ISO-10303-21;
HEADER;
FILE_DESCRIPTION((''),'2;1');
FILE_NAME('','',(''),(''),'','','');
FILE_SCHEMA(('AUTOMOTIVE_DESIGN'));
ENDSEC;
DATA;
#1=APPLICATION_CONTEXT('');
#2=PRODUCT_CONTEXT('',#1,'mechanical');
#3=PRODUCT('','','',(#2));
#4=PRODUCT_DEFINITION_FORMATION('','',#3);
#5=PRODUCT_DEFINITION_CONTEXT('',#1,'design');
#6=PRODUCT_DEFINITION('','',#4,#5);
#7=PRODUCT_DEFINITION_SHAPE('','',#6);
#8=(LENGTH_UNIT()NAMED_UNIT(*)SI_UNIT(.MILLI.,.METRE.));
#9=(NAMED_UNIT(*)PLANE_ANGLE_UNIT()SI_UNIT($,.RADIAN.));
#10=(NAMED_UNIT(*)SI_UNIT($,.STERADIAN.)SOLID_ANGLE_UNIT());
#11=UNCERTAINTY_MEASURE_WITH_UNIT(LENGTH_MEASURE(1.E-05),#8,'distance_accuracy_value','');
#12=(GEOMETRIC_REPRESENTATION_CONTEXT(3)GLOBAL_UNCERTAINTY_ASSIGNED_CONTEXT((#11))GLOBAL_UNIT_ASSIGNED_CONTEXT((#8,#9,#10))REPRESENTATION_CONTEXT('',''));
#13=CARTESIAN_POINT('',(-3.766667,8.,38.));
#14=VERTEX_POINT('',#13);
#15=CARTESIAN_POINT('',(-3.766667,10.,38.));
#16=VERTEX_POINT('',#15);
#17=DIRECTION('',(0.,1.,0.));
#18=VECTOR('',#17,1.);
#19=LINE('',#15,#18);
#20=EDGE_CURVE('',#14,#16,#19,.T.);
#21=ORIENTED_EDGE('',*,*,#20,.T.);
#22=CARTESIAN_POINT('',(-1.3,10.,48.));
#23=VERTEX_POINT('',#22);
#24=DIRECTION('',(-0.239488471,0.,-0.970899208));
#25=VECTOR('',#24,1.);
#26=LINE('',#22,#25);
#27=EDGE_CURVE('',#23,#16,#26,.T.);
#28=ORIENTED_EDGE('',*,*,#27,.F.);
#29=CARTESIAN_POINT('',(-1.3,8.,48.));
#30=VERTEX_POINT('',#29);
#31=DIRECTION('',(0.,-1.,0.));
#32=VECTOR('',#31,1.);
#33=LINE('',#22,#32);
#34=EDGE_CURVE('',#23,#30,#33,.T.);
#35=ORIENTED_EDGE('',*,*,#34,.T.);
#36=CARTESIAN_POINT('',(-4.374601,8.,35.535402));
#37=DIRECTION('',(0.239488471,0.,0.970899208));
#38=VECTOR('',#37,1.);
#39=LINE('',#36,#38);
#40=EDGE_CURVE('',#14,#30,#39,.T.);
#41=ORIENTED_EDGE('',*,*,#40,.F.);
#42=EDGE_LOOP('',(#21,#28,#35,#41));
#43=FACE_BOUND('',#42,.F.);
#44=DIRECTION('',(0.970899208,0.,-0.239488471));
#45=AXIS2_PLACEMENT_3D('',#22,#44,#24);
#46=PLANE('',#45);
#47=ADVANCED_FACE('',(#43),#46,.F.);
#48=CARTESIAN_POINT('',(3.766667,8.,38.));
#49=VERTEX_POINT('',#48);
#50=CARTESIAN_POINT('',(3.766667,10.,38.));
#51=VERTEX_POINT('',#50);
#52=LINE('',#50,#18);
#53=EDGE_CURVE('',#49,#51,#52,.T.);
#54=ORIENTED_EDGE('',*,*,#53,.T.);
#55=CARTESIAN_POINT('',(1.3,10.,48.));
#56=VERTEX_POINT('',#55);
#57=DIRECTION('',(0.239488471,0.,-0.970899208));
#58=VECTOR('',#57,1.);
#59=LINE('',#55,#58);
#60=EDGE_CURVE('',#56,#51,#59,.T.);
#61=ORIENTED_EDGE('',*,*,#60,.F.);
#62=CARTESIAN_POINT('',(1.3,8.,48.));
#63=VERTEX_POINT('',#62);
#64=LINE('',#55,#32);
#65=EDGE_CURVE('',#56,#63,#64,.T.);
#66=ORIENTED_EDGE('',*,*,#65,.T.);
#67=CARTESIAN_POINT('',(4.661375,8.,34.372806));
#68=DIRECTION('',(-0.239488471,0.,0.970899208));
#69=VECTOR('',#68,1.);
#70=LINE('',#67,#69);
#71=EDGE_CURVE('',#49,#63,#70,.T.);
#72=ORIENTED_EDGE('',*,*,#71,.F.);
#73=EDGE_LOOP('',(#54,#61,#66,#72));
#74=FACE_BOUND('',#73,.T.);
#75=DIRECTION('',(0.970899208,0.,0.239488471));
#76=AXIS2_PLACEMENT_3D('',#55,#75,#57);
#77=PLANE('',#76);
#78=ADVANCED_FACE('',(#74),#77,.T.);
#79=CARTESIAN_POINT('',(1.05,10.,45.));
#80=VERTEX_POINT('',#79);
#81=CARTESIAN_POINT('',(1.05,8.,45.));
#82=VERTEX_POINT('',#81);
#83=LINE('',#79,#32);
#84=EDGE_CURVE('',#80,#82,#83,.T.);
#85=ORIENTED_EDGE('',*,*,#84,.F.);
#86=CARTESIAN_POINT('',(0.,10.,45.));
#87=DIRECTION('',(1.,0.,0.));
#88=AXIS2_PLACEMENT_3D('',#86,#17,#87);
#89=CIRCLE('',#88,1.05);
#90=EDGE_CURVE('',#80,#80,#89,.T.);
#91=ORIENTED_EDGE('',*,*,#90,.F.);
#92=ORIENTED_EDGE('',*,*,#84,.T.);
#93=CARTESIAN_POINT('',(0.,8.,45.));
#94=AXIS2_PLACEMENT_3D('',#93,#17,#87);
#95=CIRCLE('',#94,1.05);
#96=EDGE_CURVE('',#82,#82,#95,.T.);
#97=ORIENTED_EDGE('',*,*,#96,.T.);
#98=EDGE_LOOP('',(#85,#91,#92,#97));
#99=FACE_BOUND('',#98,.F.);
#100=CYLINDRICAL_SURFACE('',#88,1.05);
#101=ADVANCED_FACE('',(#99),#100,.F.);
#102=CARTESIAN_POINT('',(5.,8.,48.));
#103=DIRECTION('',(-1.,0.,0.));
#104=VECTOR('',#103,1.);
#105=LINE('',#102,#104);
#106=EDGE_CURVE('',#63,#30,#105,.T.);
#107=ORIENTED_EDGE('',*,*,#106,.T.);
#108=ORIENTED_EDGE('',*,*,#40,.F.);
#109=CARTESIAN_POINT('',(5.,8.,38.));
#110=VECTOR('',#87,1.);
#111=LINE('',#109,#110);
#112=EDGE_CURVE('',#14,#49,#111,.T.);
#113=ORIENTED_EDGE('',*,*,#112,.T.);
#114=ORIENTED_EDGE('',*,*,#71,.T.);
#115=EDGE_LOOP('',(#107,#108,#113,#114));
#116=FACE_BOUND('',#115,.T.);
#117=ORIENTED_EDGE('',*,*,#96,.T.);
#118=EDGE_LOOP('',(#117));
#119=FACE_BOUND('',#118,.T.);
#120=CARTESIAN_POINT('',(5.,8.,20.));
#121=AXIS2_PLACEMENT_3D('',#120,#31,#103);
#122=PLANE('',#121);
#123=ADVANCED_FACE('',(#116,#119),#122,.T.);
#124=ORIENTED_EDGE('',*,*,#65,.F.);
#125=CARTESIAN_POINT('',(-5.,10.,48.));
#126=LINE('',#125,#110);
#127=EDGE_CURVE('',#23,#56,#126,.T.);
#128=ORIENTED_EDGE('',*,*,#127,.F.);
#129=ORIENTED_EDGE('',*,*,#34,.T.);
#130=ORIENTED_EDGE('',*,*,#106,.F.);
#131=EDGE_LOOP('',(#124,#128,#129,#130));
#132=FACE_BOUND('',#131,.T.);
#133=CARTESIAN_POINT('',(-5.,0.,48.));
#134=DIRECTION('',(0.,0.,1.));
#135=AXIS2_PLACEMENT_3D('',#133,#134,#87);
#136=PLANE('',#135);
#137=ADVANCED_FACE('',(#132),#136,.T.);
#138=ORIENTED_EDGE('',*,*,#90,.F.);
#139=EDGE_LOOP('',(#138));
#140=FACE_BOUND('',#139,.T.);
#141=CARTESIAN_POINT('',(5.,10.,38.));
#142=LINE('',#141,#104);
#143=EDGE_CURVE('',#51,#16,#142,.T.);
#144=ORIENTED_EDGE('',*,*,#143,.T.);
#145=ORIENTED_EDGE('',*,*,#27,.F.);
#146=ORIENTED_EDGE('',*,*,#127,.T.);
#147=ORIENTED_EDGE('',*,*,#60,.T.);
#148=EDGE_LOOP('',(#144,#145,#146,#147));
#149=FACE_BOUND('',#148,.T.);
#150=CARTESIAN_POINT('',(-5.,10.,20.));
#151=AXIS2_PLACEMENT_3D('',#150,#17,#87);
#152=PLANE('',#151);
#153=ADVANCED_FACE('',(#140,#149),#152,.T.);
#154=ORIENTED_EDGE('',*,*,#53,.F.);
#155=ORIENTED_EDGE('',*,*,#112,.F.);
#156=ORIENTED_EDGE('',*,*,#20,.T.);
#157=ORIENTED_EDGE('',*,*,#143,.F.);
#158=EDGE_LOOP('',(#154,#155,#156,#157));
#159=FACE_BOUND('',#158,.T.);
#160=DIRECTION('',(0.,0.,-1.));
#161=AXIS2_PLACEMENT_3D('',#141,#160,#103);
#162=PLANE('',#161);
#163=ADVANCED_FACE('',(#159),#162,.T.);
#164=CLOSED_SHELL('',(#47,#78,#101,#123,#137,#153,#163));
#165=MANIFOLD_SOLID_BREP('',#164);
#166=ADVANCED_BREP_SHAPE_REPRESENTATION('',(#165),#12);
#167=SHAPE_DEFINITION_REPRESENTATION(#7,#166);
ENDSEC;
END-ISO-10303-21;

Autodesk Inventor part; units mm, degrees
ref_plane "YZ Plane" through (0, 0, 0) normal (1, 0, 0) x (0, 1, 0)
ref_plane "XZ Plane" through (0, 0, 0) normal (0, 1, 0) x (-1, 0, 0)
ref_plane "XY Plane" through (0, 0, 0) normal (0, 0, 1) x (1, 0, 0)
sketch "Sketch1" plane through (0, 0, 0) normal (0, 1, 0) x (-1, 0, 0)
  circle A0 centre (0, 0) radius 1.05
  line L0 (5, 20) -> (-5, 20)
  line L1 (-5, 20) -> (-5, -5)
  line L2 (-5, -5) -> (5, -5)
  line L3 (5, -5) -> (5, 20)
  circle A1 centre (0, 15) radius 1.05
  dimension "d0" = 2.1
  dimension "d1" = 5
  dimension "d2" = 10
  dimension "d4" = 5
  dimension "d16" = 2.1
  dimension "d17" = 15
  dimension "d18" = 5
extrude "Extrusion1" add sketch "Sketch1" along normal blind 10
sketch "Sketch2" plane through (5, 0, 20) normal (1, 0, 0) x (0, 0, -1)
  line L0 (0, 10) -> (25, 10) projected
  line L1 (15, 10) -> (17.5478, 3)
  line L2 (17.5478, 3) -> (25, 3)
  line L3 (18.95, 10) -> (18.95, 0) projected
  line L4 (25, 3) -> (25, 10)
  line L5 (25, 10) -> (15, 10)
  line L6 (25, 0) -> (25, 10) projected
  line L7 (0, 0) -> (25, 0) projected
  point P0 (20, 0)
  dimension "d8" = 3
  dimension "d9" = 110
  dimension "d10" = 10
extrude "Extrusion2" cut sketch "Sketch2" against normal blind 10 contours L0 L3 L2 L1 | L0 L4 L2 L3
sketch "Sketch3" plane through (0, 10, 0) normal (0, 1, 0) x (1, 0, 0)
  circle A0 centre (0, 0) radius 2
  dimension "d13" = 4
extrude "Extrusion3" cut sketch "Sketch3" against normal up to surface (7 mm away)
sketch "Sketch4" plane through (0, 10, 0) normal (0, 1, 0) x (1, 0, 0)
  circle A0 centre (0, -15) radius 1.05 projected
  circle A1 centre (0, -15) radius 2.25
  point P0 (0, 0)
  dimension "d19" = 4.5
extrude "Extrusion4" cut sketch "Sketch4" against normal up to surface (7 mm away)
chamfer "Chamfer1" distance 1 angle 45 1 edges at (1.05, 3, 0)
sketch "Sketch5" plane through (5, 0, -5) normal (0, 0, -1) x (-1, 0, 0)
  line L0 (5, 0) -> (5, 5.666) construction
  circle A0 centre (5, 5.666) radius 2.1
  line L1 (10, 3) -> (0, 3) projected
  dimension "d25" = 4.2
  dimension "d26" = 2.666
extrude "Extrusion5" cut sketch "Sketch5" against normal blind 31.5
sketch "Sketch6" plane through (0, 10, 0) normal (0, 1, 0) x (1, 0, 0)
  line L0 (5, -5) -> (-5, -5) projected
  line L1 (0, -5) -> (0, -20) construction
  line L2 (-5, -20) -> (5, -20) projected
  line L3 (3.45, -10.575) -> (-3.45, -10.575)
  line L4 (-3.45, -10.575) -> (-3.45, -7.425)
  line L5 (-3.45, -7.425) -> (3.45, -7.425)
  line L6 (3.45, -7.425) -> (3.45, -10.575)
  line L7 (3.45, -10.575) -> (-3.45, -7.425) construction
  line L8 (-3.45, -10.575) -> (3.45, -7.425) construction
  point P0 (0, 0)
  point P1 (0, -9)
  dimension "d29" = 6.9
  dimension "d30" = 3.15
  dimension "d31" = 4
extrude "Extrusion6" cut sketch "Sketch6" against normal blind 5
sketch "Sketch7" plane through (-3.45, 10, 7.425) normal (0, 0, 1) x (1, 0, 0)
  arc A0 (5.4416, -5) -> (1.4584, -5) centre (3.45, -4.334) ccw projected
  line L0 (3.45, -8.3177) -> (0, -6.3259)
  line L1 (0, -6.3259) -> (0, -2.3421)
  line L2 (0, -2.3421) -> (3.45, -0.3503)
  line L3 (3.45, -0.3503) -> (6.9, -2.3421)
  line L4 (6.9, -2.3421) -> (6.9, -6.3259)
  line L5 (6.9, -6.3259) -> (3.45, -8.3177)
  point P0 (3.45, -10)
  dimension "d34" = 6.9
extrude "Extrusion7" cut sketch "Sketch7" along normal blind 3.15
sketch "Sketch8" plane through (-5, 0, 20) normal (0, 0, 1) x (1, 0, 0)
  line L0 (0, 10) -> (10, 10)
  line L1 (10, 10) -> (10, 8)
  line L2 (10, 8) -> (0, 8)
  line L3 (0, 8) -> (0, 10)
  line L4 (0, 10) -> (10, 10) projected
  line L5 (10, 0) -> (10, 10) projected
  line L6 (0, 0) -> (0, 10) projected
  point P0 (5, 0)
  dimension "d37" = 2
extrude "Extrusion8" add sketch "Sketch8" along normal blind 28
chamfer "Chamfer2" distance 4 angle 45 1 edges at (0, 8, 20)
sketch "Sketch9" plane through (0, 10, 0) normal (0, 1, 0) x (1, 0, 0)
  circle A0 centre (0, -45) radius 1.05
  line L0 (5, -48) -> (-5, -48) projected
  point P0 (0, 0)
  dimension "d46" = 2.1
  dimension "d50" = 3
extrude "Extrusion9" cut sketch "Sketch9" against normal blind 15
sketch "Sketch10" plane through (0, 10, 0) normal (0, 1, 0) x (1, 0, 0)
  line L0 (5, -48) -> (-5, -48) projected
  line L1 (-1.3, -48) -> (-5, -33)
  line L2 (-5, -5) -> (-5, -48) projected
  line L3 (-5, -33) -> (-5, -48)
  line L4 (-5, -48) -> (-1.3, -48)
  line L5 (0, -35) -> (0, 5) construction
  line L6 (1.3, -48) -> (5, -33)
  line L7 (5, -33) -> (5, -48)
  line L8 (5, -48) -> (1.3, -48)
  point P0 (0, 0)
  dimension "d51" = 1.3
  dimension "d52" = 15
extrude "Extrusion10" cut sketch "Sketch10" against normal blind 15
sketch "Sketch11" plane through (0, 10, 0) normal (0, 1, 0) x (1, 0, 0)
  line L0 (-5, 5) -> (-5, -20) projected
  line L1 (-5, 5) -> (5, 5)
  line L2 (5, 5) -> (5, -38)
  line L3 (5, -38) -> (-5, -38)
  line L4 (-5, -38) -> (-5, 5)
  line L5 (1.3, -48) -> (-1.3, -48) projected
  line L6 (5, -5) -> (5, -33) projected
  point P0 (0, 0)
  dimension "d55" = 10
extrude "Extrusion11" cut sketch "Sketch11" against normal blind 10
properties part number "Clamp"
